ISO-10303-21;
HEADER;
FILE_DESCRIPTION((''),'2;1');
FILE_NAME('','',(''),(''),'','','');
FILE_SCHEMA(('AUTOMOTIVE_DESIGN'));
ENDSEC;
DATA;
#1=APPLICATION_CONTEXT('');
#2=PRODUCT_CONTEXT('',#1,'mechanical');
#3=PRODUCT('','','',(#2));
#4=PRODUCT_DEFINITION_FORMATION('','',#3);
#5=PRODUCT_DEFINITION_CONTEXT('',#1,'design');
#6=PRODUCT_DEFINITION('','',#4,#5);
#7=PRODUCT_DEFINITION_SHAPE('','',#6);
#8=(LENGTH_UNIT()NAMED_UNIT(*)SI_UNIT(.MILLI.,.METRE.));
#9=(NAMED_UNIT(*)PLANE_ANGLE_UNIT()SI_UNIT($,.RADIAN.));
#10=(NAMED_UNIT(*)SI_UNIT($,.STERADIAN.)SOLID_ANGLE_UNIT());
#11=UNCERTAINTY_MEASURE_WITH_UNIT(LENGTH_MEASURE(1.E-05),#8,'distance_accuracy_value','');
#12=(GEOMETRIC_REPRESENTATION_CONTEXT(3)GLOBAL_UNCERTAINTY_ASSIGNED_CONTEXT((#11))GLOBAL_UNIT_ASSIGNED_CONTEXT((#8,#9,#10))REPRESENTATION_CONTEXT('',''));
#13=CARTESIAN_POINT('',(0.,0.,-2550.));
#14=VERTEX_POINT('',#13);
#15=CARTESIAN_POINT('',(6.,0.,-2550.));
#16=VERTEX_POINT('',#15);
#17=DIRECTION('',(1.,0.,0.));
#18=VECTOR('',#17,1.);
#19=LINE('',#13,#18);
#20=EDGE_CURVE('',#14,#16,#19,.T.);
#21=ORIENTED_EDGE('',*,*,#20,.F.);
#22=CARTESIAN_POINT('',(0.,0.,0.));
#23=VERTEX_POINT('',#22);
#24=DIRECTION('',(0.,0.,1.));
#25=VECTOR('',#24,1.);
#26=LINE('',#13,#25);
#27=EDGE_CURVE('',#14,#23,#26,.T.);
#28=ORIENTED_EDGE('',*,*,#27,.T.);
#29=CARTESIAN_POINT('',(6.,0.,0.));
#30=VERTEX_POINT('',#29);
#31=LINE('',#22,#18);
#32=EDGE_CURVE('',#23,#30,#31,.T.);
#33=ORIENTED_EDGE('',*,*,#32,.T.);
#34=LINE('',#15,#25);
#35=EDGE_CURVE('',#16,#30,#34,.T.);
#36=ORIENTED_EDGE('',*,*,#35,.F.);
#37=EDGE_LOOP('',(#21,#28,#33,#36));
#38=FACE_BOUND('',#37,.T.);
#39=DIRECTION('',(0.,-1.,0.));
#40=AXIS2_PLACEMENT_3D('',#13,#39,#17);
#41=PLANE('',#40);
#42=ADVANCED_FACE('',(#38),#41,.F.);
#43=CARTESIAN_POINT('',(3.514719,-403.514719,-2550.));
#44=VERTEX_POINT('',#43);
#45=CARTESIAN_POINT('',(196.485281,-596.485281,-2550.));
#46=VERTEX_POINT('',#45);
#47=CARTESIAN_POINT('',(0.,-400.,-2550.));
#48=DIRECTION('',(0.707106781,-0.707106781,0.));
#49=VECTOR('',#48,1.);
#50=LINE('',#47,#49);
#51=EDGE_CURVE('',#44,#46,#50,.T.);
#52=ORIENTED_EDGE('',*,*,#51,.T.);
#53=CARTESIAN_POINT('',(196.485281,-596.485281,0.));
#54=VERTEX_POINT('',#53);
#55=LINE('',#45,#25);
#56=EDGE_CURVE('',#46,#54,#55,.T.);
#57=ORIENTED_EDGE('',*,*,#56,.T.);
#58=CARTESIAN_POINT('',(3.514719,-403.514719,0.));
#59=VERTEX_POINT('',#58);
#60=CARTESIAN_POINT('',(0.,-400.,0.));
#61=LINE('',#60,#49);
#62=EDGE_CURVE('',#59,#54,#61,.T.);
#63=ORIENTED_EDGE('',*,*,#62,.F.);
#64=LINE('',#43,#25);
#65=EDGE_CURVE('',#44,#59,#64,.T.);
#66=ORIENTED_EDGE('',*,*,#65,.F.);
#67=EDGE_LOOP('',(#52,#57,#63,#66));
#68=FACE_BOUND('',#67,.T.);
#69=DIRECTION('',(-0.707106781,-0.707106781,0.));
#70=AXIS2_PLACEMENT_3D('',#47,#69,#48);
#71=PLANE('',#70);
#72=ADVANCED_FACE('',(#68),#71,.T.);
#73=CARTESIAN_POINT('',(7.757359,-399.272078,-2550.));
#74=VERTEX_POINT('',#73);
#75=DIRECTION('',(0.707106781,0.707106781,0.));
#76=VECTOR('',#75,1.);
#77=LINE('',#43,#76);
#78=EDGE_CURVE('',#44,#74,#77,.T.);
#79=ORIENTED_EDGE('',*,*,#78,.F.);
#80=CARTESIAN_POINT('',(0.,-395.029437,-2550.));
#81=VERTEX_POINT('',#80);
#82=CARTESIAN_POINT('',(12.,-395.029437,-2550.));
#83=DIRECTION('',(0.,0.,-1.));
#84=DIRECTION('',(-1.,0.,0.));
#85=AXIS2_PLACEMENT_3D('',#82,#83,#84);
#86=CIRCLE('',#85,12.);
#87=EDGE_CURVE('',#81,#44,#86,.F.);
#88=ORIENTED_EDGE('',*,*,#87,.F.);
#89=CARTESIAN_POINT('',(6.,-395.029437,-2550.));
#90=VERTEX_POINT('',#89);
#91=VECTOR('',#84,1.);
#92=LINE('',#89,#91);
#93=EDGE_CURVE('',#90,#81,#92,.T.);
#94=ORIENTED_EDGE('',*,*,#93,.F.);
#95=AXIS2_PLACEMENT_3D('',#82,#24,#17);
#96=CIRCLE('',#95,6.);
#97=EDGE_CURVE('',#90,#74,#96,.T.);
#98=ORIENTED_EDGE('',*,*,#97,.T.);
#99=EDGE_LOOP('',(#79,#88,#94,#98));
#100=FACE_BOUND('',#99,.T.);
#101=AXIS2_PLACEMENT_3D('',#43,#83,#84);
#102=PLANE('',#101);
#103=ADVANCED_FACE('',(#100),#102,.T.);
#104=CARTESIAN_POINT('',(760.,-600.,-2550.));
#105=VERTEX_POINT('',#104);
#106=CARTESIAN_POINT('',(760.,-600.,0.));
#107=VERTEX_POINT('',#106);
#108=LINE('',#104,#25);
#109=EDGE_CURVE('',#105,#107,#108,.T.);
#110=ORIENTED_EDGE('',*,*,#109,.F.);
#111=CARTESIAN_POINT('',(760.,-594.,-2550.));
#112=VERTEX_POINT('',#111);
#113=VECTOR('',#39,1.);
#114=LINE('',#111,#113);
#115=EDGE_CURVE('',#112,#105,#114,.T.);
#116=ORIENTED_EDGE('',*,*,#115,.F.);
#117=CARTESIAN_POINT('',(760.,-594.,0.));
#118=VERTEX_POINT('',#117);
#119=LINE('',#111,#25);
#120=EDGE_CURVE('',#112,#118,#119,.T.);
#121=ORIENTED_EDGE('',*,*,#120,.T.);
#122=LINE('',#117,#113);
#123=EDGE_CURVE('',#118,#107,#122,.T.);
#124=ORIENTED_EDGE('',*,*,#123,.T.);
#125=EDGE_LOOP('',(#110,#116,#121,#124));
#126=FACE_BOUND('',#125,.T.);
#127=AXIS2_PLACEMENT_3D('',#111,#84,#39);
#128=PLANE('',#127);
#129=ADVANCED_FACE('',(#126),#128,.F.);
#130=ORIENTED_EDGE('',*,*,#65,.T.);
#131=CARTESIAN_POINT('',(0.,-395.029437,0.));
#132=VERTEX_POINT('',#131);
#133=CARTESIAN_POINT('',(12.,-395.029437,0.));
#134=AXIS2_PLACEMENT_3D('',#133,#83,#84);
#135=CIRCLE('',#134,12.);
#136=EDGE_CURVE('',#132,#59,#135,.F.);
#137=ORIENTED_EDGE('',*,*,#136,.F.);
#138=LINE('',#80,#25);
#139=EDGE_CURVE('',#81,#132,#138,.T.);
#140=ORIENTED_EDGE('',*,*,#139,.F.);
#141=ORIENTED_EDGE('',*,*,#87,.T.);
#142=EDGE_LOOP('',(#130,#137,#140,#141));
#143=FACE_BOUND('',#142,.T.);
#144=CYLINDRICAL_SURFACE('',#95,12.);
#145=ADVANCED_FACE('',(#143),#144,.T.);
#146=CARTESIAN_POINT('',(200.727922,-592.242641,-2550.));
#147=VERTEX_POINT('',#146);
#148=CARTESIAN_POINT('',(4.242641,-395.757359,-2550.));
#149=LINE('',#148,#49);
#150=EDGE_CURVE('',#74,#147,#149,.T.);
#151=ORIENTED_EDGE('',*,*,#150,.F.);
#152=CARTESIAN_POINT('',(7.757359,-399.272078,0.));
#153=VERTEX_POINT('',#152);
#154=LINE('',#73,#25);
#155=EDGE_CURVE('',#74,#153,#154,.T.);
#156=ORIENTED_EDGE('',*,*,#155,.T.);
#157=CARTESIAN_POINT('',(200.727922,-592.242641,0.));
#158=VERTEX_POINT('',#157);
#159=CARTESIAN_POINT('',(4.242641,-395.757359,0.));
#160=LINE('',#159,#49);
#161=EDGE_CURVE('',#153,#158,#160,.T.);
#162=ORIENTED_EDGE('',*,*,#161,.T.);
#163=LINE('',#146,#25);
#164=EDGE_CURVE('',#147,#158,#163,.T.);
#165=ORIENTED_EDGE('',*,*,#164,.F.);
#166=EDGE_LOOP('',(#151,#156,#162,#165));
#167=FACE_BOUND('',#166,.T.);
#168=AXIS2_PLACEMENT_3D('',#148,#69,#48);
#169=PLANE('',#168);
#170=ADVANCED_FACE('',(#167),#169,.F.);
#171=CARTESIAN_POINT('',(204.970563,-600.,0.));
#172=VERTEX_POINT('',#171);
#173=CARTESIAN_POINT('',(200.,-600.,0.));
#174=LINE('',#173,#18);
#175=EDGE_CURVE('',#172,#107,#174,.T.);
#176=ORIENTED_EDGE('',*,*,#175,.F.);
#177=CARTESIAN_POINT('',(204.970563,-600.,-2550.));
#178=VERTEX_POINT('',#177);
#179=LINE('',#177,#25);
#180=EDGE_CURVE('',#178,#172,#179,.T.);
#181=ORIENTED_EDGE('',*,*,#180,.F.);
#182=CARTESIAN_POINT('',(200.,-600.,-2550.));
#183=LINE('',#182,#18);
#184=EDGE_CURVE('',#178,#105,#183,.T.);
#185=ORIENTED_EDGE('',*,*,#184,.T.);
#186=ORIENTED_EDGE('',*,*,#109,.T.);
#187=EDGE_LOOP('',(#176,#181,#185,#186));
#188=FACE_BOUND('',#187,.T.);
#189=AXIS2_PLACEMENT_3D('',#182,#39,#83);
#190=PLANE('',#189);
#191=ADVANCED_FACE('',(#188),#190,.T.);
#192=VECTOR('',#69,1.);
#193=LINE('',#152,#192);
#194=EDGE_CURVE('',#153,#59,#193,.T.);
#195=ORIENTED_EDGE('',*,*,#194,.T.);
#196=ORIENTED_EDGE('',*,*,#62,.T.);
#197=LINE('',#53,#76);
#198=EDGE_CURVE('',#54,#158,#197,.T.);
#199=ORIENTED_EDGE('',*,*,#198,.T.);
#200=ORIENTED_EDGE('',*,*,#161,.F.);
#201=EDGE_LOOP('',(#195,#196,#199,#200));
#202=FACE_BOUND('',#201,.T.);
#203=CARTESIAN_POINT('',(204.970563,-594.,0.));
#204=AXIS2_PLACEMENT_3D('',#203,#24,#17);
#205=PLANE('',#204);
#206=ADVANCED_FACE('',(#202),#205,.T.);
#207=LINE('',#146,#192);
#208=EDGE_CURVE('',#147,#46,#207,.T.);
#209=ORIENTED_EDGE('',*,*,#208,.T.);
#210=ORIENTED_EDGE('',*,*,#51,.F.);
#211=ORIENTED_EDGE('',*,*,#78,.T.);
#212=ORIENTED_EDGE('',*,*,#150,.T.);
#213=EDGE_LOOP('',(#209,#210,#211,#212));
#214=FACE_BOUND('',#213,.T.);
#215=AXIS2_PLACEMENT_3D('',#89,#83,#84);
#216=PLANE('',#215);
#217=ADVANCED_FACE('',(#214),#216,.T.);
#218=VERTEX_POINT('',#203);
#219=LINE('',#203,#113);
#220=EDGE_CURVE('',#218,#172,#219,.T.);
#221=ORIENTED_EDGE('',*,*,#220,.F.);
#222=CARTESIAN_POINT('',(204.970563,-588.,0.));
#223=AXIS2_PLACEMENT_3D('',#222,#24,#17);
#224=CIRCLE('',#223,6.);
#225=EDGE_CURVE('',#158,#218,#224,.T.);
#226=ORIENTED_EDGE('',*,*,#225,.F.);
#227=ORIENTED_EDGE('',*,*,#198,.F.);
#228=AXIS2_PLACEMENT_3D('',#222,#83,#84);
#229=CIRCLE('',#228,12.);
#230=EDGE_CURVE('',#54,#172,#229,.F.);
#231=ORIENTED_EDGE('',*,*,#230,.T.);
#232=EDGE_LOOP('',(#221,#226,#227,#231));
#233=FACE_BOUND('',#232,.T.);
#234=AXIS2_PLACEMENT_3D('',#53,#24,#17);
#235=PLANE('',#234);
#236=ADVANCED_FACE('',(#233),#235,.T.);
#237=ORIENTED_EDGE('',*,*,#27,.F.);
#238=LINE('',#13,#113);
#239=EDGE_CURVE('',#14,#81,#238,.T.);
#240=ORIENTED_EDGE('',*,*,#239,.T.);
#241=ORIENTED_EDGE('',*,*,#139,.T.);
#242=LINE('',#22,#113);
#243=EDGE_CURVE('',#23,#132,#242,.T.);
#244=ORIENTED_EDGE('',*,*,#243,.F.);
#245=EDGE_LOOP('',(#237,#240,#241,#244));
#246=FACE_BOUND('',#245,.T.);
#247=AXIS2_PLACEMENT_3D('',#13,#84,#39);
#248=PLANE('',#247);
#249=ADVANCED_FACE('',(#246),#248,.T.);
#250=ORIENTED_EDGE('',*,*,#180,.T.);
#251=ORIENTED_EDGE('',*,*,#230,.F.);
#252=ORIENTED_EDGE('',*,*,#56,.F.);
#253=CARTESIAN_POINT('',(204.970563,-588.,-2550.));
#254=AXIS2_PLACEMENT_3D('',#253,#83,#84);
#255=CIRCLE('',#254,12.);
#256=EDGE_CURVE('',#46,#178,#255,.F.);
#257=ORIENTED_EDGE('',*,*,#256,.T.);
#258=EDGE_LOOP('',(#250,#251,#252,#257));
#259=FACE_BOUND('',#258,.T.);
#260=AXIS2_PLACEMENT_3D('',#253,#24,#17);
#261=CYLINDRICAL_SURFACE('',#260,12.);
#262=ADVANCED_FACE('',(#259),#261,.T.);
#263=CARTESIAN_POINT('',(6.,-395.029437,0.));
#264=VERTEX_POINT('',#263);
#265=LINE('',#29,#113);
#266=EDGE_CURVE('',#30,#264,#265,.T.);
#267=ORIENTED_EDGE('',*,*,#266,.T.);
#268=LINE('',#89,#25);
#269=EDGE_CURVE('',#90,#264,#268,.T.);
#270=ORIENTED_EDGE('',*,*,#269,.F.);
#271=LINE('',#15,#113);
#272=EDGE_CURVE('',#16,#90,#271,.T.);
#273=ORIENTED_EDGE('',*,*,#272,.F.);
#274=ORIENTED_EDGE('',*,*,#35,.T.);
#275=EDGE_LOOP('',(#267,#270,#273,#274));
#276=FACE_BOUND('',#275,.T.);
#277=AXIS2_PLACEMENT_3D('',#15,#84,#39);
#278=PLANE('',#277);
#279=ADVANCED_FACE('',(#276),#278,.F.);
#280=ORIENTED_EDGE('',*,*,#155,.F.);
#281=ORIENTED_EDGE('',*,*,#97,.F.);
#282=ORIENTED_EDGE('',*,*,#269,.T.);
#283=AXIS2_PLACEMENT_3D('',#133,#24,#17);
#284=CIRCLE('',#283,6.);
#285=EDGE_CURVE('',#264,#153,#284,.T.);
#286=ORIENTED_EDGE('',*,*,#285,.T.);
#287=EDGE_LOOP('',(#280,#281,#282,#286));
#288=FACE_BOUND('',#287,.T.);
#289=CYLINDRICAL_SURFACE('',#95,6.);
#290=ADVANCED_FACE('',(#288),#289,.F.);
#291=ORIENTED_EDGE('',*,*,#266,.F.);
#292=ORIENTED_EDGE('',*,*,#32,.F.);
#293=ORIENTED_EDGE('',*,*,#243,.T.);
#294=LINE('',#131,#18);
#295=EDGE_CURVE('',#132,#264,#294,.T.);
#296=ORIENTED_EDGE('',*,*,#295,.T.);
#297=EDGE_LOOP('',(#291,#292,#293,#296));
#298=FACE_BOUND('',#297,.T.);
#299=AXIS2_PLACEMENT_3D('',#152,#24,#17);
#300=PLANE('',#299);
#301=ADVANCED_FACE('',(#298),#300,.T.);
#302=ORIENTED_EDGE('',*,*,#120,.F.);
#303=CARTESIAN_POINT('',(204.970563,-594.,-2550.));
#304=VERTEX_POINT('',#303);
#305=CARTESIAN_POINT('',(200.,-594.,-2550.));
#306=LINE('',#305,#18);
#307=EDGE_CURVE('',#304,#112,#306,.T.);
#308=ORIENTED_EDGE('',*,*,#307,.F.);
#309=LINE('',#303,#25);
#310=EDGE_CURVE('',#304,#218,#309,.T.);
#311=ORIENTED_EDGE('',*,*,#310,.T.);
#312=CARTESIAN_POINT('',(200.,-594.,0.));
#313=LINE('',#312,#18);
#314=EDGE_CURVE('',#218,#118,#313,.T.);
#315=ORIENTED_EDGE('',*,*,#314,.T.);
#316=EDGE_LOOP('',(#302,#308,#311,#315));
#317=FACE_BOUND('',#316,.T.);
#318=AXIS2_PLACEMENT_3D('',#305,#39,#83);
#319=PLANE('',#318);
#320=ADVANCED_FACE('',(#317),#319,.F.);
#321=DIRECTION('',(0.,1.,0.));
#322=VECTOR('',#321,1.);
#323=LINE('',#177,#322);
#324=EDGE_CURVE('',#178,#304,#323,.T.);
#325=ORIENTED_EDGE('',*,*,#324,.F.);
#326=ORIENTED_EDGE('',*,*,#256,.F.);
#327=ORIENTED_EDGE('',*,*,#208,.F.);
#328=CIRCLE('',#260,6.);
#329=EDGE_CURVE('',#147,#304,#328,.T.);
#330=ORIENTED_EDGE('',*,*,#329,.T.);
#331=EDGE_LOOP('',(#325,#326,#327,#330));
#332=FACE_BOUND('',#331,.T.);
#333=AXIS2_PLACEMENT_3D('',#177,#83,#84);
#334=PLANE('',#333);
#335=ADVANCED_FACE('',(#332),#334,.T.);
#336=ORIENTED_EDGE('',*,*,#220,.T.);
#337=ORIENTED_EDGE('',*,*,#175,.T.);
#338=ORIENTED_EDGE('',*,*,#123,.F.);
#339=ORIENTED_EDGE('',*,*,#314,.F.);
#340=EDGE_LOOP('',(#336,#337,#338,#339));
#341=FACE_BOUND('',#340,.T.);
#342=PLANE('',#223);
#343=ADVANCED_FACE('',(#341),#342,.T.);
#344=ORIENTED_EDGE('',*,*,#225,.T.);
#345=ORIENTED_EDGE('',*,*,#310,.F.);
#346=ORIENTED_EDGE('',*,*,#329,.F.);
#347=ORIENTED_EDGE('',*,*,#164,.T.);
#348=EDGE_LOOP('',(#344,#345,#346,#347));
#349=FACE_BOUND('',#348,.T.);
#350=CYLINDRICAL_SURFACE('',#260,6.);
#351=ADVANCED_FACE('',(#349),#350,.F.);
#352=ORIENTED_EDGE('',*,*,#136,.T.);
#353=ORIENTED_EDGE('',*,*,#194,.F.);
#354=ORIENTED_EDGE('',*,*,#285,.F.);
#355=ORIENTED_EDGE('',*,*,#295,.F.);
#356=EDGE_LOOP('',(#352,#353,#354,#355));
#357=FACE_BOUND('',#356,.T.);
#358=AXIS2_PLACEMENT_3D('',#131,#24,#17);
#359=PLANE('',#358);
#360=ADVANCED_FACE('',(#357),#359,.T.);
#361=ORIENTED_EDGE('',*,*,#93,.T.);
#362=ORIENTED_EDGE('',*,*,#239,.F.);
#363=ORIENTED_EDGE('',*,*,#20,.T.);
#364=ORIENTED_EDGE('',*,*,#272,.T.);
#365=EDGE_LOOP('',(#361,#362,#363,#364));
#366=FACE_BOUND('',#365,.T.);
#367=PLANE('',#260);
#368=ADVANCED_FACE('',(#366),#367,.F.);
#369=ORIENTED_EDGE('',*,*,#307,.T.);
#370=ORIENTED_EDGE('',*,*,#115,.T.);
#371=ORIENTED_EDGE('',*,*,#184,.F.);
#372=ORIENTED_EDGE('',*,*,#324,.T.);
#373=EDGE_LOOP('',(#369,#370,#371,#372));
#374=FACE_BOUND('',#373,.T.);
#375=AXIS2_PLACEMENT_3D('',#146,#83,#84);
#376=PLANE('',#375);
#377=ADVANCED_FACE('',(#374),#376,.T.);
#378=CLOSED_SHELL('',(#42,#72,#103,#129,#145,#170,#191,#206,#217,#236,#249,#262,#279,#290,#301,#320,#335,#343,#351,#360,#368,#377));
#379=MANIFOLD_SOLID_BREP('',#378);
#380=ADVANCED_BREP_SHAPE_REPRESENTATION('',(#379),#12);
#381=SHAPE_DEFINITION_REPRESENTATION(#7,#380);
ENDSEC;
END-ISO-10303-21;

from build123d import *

# Parameters (mm, degrees)
TABAN_FLAN_1_DEPTH = 2550


# Sheet-metal steps are written as plain solids
with BuildPart() as part:
    # Çizim1 → Taban-Flanş1 (new body)
    with BuildSketch(Plane.XY):
        with BuildLine():
            Line((0, 0), (0, -395.029437252))
            ThreePointArc((0, -395.029437252), (0.91344561, -399.62163844), (3.514718626, -403.514718626))
            Line((3.514718626, -403.514718626), (196.485281374, -596.485281374))
            ThreePointArc((196.485281374, -596.485281374), (200.37836156, -599.08655439), (204.970562748, -600))
            Line((204.970562748, -600), (760, -600))
            Line((760, -600), (760, -594))
            Line((760, -594), (204.970562748, -594))
            ThreePointArc((204.970562748, -594), (202.674462154, -593.543277195), (200.727922061, -592.242640687))
            Line((200.727922061, -592.242640687), (7.757359313, -399.272077939))
            ThreePointArc((7.757359313, -399.272077939), (6.456722805, -397.325537846), (6, -395.029437252))
            Line((6, -395.029437252), (6, 0))
            Line((6, 0), (0, 0))
        make_face()
    extrude(amount=-TABAN_FLAN_1_DEPTH)


solid = part.part
